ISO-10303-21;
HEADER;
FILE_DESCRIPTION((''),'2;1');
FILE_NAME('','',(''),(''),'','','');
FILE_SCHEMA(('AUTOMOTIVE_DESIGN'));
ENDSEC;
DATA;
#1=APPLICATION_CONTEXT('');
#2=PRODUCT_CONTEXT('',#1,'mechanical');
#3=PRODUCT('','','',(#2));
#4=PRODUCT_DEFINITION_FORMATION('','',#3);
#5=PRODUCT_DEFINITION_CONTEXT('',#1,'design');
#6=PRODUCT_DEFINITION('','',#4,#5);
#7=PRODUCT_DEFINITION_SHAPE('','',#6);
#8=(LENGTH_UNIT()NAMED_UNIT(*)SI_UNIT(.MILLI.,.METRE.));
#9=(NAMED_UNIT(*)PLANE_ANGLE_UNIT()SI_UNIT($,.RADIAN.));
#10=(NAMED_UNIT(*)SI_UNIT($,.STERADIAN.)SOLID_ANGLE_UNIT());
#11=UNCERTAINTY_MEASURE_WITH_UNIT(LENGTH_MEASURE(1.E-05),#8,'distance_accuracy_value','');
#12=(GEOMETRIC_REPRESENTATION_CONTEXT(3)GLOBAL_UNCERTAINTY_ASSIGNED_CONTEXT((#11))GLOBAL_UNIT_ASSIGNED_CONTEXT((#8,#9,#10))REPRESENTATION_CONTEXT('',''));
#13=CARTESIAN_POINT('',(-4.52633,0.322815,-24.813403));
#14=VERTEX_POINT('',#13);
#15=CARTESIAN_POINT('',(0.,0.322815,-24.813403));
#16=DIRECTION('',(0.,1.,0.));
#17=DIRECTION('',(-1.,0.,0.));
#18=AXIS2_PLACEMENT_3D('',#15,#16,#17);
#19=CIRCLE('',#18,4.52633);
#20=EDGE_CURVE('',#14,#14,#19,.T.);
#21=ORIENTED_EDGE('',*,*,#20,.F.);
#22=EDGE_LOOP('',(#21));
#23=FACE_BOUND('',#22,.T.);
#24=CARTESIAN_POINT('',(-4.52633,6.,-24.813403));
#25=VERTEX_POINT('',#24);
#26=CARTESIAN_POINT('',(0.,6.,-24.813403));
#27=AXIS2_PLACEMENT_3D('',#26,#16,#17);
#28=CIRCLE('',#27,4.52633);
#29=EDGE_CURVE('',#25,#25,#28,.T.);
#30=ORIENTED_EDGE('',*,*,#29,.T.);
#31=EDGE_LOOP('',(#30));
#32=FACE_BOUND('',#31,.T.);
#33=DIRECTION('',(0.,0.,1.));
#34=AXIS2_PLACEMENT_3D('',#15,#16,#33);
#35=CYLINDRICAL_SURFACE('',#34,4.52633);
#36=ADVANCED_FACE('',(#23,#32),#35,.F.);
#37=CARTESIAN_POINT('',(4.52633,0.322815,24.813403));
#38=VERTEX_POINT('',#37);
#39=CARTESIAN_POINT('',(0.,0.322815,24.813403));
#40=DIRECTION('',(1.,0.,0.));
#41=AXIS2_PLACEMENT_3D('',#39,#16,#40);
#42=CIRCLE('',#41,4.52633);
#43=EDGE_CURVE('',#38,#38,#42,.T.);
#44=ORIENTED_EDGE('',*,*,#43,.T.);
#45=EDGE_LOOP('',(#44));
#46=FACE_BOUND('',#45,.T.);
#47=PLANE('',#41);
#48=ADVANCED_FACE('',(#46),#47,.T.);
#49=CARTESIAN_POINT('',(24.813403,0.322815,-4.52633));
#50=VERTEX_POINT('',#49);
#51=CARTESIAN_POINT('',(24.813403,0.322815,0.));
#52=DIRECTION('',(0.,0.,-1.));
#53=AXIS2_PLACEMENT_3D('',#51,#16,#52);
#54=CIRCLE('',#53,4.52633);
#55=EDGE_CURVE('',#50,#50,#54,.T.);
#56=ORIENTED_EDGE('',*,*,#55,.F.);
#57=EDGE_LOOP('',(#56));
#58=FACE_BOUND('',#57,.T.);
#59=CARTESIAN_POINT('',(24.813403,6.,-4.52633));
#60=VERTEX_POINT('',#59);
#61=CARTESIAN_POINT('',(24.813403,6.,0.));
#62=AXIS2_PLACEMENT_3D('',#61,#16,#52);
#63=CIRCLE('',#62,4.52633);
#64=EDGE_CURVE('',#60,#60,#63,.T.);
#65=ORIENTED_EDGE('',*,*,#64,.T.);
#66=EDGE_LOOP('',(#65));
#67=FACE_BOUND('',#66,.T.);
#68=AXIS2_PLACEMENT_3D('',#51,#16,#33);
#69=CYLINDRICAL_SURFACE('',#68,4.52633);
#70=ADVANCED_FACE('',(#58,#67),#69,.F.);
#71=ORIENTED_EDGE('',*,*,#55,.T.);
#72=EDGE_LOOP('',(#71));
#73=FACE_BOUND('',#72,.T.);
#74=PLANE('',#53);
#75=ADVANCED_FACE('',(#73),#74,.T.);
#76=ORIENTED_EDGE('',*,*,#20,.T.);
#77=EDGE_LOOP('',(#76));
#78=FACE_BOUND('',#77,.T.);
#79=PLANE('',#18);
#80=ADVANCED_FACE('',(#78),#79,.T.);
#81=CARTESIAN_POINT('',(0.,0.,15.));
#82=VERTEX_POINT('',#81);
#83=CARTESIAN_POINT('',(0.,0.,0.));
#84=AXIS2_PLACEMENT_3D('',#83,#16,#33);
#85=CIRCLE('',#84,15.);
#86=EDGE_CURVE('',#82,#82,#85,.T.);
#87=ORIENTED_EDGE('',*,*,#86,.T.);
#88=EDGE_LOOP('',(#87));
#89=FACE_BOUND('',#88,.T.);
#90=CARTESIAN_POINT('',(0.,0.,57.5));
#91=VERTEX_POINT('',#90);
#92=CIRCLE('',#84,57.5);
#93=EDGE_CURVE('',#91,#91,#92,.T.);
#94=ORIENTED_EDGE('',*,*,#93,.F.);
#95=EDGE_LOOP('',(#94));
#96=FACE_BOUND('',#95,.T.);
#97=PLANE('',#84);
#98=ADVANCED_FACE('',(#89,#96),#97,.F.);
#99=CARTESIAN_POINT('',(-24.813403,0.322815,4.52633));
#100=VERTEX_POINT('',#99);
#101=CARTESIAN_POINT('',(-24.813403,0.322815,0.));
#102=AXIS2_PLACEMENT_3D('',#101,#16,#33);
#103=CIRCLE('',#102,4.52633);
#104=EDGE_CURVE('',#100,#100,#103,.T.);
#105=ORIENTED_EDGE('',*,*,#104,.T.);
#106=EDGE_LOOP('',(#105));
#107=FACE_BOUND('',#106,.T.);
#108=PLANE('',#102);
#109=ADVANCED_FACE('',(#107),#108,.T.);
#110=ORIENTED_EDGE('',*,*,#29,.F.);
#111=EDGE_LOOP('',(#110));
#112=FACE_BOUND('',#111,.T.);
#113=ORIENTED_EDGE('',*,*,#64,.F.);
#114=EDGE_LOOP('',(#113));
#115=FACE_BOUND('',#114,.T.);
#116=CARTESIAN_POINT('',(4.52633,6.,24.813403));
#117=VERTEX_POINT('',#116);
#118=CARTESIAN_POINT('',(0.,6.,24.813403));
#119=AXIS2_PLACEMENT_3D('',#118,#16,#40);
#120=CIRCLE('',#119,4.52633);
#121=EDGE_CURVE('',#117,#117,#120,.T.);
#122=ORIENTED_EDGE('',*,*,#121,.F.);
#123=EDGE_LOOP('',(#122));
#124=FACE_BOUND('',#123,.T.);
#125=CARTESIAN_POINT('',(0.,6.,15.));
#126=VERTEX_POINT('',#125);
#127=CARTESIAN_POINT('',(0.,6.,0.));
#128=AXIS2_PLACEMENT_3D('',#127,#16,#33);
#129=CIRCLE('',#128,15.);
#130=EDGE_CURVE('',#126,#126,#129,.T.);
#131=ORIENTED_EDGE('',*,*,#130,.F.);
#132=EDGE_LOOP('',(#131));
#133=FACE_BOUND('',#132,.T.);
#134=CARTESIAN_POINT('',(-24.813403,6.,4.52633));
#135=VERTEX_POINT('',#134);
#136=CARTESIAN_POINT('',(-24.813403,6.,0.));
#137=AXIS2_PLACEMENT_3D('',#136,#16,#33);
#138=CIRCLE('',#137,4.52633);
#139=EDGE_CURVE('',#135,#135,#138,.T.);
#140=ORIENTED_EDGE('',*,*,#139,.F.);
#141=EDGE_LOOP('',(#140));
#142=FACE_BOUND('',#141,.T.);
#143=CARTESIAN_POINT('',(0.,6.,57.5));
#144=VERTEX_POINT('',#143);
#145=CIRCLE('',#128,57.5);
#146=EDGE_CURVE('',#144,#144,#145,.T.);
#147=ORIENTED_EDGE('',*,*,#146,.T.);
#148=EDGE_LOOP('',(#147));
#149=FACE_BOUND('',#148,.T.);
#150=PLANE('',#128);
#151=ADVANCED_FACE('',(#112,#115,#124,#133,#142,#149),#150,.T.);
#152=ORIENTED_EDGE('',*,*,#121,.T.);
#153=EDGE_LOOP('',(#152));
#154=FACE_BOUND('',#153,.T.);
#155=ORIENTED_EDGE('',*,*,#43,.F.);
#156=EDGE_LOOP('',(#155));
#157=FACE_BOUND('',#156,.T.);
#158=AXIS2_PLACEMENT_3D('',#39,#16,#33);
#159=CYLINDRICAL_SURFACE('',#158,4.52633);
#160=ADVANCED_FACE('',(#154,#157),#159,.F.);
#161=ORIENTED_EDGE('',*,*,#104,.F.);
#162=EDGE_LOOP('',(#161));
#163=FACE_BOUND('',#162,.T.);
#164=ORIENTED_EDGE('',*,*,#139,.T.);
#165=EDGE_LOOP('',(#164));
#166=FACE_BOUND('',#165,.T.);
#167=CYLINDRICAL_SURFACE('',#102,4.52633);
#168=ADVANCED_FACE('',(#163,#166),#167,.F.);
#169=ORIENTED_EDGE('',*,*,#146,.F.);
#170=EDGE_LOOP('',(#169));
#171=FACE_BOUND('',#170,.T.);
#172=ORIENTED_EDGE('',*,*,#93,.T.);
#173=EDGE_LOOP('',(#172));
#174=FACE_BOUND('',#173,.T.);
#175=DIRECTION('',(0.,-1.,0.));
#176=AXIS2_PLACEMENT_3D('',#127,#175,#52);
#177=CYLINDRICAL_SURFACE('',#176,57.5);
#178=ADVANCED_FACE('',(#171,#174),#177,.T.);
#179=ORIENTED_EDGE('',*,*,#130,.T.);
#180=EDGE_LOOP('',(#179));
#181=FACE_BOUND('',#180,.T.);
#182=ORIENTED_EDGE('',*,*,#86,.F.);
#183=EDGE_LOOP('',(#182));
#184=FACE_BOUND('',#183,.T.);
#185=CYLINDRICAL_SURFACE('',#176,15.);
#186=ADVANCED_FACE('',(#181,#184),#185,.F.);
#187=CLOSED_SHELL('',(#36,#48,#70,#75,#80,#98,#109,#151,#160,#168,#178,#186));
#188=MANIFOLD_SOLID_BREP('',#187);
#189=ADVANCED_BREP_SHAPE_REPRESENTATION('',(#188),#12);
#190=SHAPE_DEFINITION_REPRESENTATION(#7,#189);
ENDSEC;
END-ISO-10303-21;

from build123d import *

# Parameters (mm, degrees)
SKETCH1_R           = 57.5
BOSS_EXTRUDE1_DEPTH = 6
SKETCH2_R           = 15
CUT_EXTRUDE1_DEPTH  = 82.538334543
SKETCH3_R           = 4.526330216
CUT_EXTRUDE2_DEPTH  = 5.677185303
CIRPATTERN1_COUNT   = 4


with BuildPart() as part:
    # Sketch1 → Boss-Extrude1 (new body)
    with BuildSketch(Plane(origin=(0, 0, 0), x_dir=(1, 0, 0), z_dir=(0, 1, 0))):
        Circle(SKETCH1_R)
    extrude(amount=BOSS_EXTRUDE1_DEPTH)

    # Sketch2 → Cut-Extrude1 (cut, through all)
    with BuildSketch(Plane(origin=(0, 0, 0), x_dir=(1, 0, 0), z_dir=(0, 1, 0))):
        Circle(SKETCH2_R)
    extrude(amount=CUT_EXTRUDE1_DEPTH, mode=Mode.SUBTRACT)

    # Sketch3 → Cut-Extrude2 (cut)
    with BuildSketch(Plane(origin=(0, 6, 0), x_dir=(1, 0, 0), z_dir=(0, 1, 0))):
        with Locations((-24.813403353, 0)):
            Circle(SKETCH3_R)
    cut_extrude2 = extrude(amount=-CUT_EXTRUDE2_DEPTH, mode=Mode.SUBTRACT)

    # CirPattern1: Cut-Extrude2 ×4 about axis
    cirpattern1_axis = Axis((0, 0, 0), (0, 1, 0))
    for i in range(1, CIRPATTERN1_COUNT):
        add(cut_extrude2.rotate(cirpattern1_axis, i * 360 / CIRPATTERN1_COUNT), mode=Mode.SUBTRACT)


solid = part.part
